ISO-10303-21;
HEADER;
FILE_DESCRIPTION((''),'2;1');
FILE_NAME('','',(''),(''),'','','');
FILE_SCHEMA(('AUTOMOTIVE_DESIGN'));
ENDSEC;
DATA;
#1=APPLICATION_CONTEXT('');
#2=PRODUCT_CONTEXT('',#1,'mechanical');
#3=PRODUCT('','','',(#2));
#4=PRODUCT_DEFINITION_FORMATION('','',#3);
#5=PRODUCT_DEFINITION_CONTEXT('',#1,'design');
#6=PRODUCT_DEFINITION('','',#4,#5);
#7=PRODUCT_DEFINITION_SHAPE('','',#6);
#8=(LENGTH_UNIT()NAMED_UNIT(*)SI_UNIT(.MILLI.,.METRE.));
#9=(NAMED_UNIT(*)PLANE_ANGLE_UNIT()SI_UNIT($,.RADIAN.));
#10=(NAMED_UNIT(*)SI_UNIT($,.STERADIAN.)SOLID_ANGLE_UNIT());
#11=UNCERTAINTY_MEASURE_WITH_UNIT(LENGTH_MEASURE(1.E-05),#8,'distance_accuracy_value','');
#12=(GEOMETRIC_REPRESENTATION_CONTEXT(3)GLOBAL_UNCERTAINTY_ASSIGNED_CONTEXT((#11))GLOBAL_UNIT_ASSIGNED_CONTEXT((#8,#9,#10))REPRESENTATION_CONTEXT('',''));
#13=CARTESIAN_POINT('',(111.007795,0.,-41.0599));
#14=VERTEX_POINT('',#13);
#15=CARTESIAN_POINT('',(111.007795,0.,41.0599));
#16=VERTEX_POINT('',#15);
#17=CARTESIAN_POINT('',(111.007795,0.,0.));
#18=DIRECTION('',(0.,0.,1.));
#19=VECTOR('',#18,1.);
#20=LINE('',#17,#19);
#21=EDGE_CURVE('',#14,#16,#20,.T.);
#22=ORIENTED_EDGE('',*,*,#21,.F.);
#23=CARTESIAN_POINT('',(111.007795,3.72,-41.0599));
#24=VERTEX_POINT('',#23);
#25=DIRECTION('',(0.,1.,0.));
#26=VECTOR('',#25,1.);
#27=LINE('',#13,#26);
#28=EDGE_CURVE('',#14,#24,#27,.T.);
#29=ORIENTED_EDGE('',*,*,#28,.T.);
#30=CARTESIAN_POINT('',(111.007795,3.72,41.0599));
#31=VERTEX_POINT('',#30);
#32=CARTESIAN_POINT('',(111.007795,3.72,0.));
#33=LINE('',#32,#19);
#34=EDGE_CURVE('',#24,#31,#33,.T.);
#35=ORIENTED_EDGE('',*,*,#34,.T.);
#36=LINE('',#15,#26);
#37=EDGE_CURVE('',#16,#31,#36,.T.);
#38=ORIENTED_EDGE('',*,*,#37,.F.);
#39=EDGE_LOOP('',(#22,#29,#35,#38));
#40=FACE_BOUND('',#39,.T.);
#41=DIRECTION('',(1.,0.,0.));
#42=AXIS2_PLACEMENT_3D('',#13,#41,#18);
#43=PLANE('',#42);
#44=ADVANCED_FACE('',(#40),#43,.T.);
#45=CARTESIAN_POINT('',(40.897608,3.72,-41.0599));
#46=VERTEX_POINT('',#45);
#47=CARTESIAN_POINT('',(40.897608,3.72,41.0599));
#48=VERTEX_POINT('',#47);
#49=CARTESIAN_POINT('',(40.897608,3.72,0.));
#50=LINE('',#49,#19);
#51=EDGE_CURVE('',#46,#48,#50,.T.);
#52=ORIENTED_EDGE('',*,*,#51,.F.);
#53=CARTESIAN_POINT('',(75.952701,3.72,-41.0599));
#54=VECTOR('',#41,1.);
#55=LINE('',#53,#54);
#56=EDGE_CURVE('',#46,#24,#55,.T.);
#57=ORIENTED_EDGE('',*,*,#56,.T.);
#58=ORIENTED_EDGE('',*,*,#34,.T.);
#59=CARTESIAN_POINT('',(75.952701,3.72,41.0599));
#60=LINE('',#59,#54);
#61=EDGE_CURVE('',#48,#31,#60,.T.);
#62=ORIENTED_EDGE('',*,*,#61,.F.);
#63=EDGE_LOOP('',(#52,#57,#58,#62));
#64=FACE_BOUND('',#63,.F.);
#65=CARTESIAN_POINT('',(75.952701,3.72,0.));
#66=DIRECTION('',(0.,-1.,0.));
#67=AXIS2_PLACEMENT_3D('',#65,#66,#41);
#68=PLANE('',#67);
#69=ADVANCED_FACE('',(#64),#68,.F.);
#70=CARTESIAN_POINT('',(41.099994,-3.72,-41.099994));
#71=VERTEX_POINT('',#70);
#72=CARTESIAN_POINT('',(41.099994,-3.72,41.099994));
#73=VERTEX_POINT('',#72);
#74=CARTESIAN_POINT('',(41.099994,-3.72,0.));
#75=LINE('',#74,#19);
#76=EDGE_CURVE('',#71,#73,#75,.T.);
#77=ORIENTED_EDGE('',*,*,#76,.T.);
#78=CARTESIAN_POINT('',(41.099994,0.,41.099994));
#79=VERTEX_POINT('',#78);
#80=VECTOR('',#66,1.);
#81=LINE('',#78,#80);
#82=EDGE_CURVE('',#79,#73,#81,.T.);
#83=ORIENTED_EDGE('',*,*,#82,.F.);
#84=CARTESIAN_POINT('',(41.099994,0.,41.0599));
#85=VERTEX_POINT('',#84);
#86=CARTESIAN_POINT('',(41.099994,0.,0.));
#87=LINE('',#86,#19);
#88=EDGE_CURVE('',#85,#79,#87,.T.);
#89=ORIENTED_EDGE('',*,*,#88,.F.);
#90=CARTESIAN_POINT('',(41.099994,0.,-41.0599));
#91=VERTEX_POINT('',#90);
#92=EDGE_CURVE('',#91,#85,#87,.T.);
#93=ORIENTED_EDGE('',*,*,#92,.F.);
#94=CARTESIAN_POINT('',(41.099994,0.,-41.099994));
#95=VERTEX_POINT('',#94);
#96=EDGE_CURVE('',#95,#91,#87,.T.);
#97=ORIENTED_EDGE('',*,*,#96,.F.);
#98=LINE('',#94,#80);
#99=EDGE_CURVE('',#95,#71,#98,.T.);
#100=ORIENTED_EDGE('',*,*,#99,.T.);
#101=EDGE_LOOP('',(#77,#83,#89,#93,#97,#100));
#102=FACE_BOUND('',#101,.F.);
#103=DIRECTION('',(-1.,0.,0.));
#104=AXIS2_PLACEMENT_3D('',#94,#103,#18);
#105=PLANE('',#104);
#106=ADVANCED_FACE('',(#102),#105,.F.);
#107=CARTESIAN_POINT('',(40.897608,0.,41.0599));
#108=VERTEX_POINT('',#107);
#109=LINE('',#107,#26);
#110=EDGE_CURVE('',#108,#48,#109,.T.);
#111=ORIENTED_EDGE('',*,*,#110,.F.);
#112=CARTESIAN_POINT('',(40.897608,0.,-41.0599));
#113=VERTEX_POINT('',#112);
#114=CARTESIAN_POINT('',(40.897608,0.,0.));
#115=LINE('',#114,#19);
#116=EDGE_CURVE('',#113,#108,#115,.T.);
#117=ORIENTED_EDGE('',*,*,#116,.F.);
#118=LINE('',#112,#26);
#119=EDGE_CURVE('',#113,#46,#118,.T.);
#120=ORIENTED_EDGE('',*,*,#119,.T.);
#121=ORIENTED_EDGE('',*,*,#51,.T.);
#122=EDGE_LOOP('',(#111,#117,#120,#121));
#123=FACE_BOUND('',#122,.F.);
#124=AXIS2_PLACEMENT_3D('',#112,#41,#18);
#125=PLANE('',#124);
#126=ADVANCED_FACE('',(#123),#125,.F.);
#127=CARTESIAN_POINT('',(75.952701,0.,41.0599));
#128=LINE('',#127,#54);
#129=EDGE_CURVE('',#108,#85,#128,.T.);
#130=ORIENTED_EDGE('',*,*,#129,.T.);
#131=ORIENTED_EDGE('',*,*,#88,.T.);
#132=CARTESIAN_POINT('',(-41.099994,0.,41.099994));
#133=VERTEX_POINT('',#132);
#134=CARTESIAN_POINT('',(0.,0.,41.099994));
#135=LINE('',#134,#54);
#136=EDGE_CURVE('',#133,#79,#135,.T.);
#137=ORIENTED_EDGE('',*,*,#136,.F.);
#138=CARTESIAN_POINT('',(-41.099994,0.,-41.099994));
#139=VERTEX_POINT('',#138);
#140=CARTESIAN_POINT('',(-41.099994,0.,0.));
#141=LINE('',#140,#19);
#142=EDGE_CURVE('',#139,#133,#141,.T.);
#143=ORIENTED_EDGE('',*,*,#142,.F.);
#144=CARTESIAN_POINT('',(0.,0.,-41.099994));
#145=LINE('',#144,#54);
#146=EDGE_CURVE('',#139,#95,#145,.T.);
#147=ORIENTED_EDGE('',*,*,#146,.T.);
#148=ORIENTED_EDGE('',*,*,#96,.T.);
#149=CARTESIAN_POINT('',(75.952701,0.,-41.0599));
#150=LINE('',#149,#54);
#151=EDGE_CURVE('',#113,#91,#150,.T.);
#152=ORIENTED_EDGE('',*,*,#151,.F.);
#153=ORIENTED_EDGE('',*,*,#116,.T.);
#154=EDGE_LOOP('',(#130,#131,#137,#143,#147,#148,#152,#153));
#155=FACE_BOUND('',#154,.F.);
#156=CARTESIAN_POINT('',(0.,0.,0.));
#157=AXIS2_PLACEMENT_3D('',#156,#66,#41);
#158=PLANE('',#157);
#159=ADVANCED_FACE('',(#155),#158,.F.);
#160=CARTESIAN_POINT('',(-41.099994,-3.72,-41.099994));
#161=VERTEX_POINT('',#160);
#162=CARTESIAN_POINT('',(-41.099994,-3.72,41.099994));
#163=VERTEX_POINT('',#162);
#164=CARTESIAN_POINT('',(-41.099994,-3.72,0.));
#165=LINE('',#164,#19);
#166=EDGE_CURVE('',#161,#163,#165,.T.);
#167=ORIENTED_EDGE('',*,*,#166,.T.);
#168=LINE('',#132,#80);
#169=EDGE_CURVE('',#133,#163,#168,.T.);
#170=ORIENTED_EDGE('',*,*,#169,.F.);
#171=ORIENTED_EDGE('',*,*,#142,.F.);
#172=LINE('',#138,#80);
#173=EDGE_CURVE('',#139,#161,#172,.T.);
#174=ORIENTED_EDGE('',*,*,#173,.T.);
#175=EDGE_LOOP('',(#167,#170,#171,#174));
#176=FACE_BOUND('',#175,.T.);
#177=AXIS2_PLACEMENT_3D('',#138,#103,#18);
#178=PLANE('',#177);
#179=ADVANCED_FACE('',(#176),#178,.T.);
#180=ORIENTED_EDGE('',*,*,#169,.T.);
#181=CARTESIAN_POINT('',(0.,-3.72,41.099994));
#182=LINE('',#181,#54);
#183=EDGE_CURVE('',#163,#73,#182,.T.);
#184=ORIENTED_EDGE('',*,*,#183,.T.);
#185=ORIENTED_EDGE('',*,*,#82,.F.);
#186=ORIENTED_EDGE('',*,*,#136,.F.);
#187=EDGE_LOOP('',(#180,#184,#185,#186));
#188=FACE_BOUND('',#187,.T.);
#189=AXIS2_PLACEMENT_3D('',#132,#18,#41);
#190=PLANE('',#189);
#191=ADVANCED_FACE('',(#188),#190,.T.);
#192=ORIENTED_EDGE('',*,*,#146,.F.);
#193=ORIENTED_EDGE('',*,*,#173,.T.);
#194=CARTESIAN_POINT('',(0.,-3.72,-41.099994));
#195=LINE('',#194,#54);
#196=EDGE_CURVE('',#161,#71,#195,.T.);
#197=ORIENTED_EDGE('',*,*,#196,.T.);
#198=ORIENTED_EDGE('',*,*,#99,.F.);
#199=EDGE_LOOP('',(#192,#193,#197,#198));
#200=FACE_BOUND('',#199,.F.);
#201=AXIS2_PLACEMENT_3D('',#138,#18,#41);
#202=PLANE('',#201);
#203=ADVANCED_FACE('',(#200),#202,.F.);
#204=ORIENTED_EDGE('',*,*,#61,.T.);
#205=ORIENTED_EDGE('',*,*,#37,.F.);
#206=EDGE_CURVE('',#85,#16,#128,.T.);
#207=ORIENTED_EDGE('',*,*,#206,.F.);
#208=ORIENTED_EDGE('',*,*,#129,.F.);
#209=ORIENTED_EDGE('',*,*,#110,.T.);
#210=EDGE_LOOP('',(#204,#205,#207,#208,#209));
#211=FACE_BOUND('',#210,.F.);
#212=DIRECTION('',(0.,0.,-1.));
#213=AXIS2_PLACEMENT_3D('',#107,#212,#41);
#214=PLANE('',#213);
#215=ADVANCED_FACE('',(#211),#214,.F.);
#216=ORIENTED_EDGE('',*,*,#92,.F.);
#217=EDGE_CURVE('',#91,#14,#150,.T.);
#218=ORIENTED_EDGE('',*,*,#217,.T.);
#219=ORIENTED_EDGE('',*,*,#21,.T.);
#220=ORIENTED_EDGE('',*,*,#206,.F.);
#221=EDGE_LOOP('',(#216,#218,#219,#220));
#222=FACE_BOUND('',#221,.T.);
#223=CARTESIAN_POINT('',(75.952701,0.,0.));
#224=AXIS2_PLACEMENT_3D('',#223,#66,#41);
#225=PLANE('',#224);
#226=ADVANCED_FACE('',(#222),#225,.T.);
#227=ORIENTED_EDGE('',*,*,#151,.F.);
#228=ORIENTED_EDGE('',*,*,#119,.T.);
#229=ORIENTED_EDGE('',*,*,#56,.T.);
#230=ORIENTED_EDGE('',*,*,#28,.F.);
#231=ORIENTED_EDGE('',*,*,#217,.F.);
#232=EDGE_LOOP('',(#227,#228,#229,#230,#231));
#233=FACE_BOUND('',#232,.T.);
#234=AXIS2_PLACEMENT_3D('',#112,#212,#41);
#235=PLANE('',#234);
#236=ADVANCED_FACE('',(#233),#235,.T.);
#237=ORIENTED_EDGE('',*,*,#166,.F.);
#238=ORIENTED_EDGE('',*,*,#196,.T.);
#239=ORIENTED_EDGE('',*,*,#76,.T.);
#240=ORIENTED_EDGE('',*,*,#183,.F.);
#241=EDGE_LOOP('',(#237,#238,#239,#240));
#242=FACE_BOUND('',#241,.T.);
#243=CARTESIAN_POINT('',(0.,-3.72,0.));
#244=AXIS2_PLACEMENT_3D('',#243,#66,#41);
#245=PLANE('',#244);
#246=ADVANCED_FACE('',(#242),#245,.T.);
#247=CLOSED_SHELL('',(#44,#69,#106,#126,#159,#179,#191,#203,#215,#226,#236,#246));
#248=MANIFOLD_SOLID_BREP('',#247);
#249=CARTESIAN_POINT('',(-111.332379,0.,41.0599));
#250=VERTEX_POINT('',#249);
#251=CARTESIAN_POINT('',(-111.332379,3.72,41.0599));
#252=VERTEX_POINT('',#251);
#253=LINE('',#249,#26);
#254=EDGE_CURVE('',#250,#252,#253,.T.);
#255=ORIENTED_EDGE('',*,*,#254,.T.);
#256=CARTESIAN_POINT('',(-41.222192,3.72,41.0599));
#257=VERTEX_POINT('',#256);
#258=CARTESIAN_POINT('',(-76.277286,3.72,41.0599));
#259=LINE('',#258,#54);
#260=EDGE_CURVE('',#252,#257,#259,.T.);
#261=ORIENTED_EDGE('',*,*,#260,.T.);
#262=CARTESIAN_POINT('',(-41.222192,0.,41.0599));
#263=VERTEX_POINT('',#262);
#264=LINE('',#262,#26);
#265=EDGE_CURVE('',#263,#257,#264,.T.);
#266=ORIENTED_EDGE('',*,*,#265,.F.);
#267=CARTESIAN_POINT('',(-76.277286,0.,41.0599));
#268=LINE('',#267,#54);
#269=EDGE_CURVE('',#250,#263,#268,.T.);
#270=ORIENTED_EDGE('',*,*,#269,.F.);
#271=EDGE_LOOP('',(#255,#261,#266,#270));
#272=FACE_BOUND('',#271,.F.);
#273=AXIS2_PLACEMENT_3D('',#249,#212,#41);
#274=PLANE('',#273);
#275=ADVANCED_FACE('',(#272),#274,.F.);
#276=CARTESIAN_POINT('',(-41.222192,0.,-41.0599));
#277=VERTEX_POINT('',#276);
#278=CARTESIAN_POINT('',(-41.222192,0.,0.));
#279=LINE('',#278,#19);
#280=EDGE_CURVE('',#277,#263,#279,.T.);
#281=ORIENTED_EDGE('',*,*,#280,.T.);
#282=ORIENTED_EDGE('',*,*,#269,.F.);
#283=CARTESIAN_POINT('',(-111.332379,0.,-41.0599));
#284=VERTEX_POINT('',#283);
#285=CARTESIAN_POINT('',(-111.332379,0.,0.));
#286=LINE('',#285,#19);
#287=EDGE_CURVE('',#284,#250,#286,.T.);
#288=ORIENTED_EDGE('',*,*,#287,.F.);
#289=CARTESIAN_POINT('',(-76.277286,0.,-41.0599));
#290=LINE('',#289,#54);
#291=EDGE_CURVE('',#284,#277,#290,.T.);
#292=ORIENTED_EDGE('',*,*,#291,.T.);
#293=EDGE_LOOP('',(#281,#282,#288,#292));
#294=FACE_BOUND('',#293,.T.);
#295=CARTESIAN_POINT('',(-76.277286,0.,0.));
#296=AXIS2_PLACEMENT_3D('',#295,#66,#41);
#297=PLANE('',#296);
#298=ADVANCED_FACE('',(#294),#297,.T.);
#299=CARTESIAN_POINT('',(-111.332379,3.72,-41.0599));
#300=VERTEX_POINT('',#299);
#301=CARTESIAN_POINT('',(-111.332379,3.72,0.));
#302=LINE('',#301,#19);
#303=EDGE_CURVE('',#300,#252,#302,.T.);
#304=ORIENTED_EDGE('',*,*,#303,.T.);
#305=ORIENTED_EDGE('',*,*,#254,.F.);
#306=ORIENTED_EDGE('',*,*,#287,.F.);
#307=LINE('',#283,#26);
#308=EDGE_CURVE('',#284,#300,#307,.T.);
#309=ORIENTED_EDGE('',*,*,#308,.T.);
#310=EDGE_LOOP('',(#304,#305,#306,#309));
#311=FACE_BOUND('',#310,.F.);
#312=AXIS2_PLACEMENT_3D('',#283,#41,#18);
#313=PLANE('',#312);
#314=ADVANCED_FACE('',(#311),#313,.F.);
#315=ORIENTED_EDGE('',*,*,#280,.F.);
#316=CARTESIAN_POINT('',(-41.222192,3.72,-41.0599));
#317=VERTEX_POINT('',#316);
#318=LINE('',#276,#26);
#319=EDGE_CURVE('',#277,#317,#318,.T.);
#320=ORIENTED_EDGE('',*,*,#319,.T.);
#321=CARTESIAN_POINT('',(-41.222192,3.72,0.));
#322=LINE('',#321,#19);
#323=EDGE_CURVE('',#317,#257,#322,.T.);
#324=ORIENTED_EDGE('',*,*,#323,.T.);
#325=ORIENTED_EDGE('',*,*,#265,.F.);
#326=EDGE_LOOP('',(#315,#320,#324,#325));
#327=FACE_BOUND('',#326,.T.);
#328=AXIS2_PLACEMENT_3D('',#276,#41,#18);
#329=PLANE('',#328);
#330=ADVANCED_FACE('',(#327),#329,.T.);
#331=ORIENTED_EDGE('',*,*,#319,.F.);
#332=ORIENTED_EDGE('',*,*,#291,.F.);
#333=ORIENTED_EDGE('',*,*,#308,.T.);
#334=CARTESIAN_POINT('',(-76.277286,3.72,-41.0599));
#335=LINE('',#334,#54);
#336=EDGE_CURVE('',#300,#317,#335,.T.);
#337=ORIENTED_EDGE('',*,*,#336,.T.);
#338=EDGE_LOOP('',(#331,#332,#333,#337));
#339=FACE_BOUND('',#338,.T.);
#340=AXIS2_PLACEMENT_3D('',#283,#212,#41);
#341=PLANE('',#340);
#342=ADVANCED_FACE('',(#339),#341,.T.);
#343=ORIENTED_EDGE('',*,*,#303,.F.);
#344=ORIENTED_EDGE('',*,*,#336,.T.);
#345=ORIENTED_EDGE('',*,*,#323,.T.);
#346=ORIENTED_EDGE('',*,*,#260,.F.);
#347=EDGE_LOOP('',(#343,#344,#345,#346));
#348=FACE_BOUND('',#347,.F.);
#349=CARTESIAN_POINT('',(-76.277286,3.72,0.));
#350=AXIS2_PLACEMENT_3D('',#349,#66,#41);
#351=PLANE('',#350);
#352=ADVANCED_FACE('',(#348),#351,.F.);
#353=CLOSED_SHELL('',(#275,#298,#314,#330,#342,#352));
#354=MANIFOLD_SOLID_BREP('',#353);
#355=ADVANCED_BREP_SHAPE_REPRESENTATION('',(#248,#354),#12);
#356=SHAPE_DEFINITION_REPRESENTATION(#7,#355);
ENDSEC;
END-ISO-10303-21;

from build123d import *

# Parameters (mm, degrees)
F0_W     = 82.199988
F0_H     = 82.199988
F2_DEPTH = 3.719999926
F1_W     = 70.1101869345
F1_H     = 82.1198001504
F3_DEPTH = 3.719999926


# Not quite as in the source:
# - a feature of the source that left no trace in its solid (it failed there, or was rolled back) is left out


with BuildPart() as f2:
    # F0 (on Front) → F2 (new body)
    with BuildSketch(Plane.XZ):
        Rectangle(F0_W, F0_H)
    extrude(amount=F2_DEPTH)

    # F1 (on Front) → F3, piece 2 (join)
    with BuildSketch(Plane.XZ):
        with Locations((75.9527012706, 0)):
            Rectangle(F1_W, F1_H)
    extrude(amount=-F3_DEPTH)


with BuildPart() as f3:
    # F1 (on Front) → F3 (new body)
    with BuildSketch(Plane.XZ):
        with Locations((-76.2772858143, 0)):
            Rectangle(F1_W, F1_H)
    extrude(amount=-F3_DEPTH)


solid = Compound([f2.part, f3.part])
